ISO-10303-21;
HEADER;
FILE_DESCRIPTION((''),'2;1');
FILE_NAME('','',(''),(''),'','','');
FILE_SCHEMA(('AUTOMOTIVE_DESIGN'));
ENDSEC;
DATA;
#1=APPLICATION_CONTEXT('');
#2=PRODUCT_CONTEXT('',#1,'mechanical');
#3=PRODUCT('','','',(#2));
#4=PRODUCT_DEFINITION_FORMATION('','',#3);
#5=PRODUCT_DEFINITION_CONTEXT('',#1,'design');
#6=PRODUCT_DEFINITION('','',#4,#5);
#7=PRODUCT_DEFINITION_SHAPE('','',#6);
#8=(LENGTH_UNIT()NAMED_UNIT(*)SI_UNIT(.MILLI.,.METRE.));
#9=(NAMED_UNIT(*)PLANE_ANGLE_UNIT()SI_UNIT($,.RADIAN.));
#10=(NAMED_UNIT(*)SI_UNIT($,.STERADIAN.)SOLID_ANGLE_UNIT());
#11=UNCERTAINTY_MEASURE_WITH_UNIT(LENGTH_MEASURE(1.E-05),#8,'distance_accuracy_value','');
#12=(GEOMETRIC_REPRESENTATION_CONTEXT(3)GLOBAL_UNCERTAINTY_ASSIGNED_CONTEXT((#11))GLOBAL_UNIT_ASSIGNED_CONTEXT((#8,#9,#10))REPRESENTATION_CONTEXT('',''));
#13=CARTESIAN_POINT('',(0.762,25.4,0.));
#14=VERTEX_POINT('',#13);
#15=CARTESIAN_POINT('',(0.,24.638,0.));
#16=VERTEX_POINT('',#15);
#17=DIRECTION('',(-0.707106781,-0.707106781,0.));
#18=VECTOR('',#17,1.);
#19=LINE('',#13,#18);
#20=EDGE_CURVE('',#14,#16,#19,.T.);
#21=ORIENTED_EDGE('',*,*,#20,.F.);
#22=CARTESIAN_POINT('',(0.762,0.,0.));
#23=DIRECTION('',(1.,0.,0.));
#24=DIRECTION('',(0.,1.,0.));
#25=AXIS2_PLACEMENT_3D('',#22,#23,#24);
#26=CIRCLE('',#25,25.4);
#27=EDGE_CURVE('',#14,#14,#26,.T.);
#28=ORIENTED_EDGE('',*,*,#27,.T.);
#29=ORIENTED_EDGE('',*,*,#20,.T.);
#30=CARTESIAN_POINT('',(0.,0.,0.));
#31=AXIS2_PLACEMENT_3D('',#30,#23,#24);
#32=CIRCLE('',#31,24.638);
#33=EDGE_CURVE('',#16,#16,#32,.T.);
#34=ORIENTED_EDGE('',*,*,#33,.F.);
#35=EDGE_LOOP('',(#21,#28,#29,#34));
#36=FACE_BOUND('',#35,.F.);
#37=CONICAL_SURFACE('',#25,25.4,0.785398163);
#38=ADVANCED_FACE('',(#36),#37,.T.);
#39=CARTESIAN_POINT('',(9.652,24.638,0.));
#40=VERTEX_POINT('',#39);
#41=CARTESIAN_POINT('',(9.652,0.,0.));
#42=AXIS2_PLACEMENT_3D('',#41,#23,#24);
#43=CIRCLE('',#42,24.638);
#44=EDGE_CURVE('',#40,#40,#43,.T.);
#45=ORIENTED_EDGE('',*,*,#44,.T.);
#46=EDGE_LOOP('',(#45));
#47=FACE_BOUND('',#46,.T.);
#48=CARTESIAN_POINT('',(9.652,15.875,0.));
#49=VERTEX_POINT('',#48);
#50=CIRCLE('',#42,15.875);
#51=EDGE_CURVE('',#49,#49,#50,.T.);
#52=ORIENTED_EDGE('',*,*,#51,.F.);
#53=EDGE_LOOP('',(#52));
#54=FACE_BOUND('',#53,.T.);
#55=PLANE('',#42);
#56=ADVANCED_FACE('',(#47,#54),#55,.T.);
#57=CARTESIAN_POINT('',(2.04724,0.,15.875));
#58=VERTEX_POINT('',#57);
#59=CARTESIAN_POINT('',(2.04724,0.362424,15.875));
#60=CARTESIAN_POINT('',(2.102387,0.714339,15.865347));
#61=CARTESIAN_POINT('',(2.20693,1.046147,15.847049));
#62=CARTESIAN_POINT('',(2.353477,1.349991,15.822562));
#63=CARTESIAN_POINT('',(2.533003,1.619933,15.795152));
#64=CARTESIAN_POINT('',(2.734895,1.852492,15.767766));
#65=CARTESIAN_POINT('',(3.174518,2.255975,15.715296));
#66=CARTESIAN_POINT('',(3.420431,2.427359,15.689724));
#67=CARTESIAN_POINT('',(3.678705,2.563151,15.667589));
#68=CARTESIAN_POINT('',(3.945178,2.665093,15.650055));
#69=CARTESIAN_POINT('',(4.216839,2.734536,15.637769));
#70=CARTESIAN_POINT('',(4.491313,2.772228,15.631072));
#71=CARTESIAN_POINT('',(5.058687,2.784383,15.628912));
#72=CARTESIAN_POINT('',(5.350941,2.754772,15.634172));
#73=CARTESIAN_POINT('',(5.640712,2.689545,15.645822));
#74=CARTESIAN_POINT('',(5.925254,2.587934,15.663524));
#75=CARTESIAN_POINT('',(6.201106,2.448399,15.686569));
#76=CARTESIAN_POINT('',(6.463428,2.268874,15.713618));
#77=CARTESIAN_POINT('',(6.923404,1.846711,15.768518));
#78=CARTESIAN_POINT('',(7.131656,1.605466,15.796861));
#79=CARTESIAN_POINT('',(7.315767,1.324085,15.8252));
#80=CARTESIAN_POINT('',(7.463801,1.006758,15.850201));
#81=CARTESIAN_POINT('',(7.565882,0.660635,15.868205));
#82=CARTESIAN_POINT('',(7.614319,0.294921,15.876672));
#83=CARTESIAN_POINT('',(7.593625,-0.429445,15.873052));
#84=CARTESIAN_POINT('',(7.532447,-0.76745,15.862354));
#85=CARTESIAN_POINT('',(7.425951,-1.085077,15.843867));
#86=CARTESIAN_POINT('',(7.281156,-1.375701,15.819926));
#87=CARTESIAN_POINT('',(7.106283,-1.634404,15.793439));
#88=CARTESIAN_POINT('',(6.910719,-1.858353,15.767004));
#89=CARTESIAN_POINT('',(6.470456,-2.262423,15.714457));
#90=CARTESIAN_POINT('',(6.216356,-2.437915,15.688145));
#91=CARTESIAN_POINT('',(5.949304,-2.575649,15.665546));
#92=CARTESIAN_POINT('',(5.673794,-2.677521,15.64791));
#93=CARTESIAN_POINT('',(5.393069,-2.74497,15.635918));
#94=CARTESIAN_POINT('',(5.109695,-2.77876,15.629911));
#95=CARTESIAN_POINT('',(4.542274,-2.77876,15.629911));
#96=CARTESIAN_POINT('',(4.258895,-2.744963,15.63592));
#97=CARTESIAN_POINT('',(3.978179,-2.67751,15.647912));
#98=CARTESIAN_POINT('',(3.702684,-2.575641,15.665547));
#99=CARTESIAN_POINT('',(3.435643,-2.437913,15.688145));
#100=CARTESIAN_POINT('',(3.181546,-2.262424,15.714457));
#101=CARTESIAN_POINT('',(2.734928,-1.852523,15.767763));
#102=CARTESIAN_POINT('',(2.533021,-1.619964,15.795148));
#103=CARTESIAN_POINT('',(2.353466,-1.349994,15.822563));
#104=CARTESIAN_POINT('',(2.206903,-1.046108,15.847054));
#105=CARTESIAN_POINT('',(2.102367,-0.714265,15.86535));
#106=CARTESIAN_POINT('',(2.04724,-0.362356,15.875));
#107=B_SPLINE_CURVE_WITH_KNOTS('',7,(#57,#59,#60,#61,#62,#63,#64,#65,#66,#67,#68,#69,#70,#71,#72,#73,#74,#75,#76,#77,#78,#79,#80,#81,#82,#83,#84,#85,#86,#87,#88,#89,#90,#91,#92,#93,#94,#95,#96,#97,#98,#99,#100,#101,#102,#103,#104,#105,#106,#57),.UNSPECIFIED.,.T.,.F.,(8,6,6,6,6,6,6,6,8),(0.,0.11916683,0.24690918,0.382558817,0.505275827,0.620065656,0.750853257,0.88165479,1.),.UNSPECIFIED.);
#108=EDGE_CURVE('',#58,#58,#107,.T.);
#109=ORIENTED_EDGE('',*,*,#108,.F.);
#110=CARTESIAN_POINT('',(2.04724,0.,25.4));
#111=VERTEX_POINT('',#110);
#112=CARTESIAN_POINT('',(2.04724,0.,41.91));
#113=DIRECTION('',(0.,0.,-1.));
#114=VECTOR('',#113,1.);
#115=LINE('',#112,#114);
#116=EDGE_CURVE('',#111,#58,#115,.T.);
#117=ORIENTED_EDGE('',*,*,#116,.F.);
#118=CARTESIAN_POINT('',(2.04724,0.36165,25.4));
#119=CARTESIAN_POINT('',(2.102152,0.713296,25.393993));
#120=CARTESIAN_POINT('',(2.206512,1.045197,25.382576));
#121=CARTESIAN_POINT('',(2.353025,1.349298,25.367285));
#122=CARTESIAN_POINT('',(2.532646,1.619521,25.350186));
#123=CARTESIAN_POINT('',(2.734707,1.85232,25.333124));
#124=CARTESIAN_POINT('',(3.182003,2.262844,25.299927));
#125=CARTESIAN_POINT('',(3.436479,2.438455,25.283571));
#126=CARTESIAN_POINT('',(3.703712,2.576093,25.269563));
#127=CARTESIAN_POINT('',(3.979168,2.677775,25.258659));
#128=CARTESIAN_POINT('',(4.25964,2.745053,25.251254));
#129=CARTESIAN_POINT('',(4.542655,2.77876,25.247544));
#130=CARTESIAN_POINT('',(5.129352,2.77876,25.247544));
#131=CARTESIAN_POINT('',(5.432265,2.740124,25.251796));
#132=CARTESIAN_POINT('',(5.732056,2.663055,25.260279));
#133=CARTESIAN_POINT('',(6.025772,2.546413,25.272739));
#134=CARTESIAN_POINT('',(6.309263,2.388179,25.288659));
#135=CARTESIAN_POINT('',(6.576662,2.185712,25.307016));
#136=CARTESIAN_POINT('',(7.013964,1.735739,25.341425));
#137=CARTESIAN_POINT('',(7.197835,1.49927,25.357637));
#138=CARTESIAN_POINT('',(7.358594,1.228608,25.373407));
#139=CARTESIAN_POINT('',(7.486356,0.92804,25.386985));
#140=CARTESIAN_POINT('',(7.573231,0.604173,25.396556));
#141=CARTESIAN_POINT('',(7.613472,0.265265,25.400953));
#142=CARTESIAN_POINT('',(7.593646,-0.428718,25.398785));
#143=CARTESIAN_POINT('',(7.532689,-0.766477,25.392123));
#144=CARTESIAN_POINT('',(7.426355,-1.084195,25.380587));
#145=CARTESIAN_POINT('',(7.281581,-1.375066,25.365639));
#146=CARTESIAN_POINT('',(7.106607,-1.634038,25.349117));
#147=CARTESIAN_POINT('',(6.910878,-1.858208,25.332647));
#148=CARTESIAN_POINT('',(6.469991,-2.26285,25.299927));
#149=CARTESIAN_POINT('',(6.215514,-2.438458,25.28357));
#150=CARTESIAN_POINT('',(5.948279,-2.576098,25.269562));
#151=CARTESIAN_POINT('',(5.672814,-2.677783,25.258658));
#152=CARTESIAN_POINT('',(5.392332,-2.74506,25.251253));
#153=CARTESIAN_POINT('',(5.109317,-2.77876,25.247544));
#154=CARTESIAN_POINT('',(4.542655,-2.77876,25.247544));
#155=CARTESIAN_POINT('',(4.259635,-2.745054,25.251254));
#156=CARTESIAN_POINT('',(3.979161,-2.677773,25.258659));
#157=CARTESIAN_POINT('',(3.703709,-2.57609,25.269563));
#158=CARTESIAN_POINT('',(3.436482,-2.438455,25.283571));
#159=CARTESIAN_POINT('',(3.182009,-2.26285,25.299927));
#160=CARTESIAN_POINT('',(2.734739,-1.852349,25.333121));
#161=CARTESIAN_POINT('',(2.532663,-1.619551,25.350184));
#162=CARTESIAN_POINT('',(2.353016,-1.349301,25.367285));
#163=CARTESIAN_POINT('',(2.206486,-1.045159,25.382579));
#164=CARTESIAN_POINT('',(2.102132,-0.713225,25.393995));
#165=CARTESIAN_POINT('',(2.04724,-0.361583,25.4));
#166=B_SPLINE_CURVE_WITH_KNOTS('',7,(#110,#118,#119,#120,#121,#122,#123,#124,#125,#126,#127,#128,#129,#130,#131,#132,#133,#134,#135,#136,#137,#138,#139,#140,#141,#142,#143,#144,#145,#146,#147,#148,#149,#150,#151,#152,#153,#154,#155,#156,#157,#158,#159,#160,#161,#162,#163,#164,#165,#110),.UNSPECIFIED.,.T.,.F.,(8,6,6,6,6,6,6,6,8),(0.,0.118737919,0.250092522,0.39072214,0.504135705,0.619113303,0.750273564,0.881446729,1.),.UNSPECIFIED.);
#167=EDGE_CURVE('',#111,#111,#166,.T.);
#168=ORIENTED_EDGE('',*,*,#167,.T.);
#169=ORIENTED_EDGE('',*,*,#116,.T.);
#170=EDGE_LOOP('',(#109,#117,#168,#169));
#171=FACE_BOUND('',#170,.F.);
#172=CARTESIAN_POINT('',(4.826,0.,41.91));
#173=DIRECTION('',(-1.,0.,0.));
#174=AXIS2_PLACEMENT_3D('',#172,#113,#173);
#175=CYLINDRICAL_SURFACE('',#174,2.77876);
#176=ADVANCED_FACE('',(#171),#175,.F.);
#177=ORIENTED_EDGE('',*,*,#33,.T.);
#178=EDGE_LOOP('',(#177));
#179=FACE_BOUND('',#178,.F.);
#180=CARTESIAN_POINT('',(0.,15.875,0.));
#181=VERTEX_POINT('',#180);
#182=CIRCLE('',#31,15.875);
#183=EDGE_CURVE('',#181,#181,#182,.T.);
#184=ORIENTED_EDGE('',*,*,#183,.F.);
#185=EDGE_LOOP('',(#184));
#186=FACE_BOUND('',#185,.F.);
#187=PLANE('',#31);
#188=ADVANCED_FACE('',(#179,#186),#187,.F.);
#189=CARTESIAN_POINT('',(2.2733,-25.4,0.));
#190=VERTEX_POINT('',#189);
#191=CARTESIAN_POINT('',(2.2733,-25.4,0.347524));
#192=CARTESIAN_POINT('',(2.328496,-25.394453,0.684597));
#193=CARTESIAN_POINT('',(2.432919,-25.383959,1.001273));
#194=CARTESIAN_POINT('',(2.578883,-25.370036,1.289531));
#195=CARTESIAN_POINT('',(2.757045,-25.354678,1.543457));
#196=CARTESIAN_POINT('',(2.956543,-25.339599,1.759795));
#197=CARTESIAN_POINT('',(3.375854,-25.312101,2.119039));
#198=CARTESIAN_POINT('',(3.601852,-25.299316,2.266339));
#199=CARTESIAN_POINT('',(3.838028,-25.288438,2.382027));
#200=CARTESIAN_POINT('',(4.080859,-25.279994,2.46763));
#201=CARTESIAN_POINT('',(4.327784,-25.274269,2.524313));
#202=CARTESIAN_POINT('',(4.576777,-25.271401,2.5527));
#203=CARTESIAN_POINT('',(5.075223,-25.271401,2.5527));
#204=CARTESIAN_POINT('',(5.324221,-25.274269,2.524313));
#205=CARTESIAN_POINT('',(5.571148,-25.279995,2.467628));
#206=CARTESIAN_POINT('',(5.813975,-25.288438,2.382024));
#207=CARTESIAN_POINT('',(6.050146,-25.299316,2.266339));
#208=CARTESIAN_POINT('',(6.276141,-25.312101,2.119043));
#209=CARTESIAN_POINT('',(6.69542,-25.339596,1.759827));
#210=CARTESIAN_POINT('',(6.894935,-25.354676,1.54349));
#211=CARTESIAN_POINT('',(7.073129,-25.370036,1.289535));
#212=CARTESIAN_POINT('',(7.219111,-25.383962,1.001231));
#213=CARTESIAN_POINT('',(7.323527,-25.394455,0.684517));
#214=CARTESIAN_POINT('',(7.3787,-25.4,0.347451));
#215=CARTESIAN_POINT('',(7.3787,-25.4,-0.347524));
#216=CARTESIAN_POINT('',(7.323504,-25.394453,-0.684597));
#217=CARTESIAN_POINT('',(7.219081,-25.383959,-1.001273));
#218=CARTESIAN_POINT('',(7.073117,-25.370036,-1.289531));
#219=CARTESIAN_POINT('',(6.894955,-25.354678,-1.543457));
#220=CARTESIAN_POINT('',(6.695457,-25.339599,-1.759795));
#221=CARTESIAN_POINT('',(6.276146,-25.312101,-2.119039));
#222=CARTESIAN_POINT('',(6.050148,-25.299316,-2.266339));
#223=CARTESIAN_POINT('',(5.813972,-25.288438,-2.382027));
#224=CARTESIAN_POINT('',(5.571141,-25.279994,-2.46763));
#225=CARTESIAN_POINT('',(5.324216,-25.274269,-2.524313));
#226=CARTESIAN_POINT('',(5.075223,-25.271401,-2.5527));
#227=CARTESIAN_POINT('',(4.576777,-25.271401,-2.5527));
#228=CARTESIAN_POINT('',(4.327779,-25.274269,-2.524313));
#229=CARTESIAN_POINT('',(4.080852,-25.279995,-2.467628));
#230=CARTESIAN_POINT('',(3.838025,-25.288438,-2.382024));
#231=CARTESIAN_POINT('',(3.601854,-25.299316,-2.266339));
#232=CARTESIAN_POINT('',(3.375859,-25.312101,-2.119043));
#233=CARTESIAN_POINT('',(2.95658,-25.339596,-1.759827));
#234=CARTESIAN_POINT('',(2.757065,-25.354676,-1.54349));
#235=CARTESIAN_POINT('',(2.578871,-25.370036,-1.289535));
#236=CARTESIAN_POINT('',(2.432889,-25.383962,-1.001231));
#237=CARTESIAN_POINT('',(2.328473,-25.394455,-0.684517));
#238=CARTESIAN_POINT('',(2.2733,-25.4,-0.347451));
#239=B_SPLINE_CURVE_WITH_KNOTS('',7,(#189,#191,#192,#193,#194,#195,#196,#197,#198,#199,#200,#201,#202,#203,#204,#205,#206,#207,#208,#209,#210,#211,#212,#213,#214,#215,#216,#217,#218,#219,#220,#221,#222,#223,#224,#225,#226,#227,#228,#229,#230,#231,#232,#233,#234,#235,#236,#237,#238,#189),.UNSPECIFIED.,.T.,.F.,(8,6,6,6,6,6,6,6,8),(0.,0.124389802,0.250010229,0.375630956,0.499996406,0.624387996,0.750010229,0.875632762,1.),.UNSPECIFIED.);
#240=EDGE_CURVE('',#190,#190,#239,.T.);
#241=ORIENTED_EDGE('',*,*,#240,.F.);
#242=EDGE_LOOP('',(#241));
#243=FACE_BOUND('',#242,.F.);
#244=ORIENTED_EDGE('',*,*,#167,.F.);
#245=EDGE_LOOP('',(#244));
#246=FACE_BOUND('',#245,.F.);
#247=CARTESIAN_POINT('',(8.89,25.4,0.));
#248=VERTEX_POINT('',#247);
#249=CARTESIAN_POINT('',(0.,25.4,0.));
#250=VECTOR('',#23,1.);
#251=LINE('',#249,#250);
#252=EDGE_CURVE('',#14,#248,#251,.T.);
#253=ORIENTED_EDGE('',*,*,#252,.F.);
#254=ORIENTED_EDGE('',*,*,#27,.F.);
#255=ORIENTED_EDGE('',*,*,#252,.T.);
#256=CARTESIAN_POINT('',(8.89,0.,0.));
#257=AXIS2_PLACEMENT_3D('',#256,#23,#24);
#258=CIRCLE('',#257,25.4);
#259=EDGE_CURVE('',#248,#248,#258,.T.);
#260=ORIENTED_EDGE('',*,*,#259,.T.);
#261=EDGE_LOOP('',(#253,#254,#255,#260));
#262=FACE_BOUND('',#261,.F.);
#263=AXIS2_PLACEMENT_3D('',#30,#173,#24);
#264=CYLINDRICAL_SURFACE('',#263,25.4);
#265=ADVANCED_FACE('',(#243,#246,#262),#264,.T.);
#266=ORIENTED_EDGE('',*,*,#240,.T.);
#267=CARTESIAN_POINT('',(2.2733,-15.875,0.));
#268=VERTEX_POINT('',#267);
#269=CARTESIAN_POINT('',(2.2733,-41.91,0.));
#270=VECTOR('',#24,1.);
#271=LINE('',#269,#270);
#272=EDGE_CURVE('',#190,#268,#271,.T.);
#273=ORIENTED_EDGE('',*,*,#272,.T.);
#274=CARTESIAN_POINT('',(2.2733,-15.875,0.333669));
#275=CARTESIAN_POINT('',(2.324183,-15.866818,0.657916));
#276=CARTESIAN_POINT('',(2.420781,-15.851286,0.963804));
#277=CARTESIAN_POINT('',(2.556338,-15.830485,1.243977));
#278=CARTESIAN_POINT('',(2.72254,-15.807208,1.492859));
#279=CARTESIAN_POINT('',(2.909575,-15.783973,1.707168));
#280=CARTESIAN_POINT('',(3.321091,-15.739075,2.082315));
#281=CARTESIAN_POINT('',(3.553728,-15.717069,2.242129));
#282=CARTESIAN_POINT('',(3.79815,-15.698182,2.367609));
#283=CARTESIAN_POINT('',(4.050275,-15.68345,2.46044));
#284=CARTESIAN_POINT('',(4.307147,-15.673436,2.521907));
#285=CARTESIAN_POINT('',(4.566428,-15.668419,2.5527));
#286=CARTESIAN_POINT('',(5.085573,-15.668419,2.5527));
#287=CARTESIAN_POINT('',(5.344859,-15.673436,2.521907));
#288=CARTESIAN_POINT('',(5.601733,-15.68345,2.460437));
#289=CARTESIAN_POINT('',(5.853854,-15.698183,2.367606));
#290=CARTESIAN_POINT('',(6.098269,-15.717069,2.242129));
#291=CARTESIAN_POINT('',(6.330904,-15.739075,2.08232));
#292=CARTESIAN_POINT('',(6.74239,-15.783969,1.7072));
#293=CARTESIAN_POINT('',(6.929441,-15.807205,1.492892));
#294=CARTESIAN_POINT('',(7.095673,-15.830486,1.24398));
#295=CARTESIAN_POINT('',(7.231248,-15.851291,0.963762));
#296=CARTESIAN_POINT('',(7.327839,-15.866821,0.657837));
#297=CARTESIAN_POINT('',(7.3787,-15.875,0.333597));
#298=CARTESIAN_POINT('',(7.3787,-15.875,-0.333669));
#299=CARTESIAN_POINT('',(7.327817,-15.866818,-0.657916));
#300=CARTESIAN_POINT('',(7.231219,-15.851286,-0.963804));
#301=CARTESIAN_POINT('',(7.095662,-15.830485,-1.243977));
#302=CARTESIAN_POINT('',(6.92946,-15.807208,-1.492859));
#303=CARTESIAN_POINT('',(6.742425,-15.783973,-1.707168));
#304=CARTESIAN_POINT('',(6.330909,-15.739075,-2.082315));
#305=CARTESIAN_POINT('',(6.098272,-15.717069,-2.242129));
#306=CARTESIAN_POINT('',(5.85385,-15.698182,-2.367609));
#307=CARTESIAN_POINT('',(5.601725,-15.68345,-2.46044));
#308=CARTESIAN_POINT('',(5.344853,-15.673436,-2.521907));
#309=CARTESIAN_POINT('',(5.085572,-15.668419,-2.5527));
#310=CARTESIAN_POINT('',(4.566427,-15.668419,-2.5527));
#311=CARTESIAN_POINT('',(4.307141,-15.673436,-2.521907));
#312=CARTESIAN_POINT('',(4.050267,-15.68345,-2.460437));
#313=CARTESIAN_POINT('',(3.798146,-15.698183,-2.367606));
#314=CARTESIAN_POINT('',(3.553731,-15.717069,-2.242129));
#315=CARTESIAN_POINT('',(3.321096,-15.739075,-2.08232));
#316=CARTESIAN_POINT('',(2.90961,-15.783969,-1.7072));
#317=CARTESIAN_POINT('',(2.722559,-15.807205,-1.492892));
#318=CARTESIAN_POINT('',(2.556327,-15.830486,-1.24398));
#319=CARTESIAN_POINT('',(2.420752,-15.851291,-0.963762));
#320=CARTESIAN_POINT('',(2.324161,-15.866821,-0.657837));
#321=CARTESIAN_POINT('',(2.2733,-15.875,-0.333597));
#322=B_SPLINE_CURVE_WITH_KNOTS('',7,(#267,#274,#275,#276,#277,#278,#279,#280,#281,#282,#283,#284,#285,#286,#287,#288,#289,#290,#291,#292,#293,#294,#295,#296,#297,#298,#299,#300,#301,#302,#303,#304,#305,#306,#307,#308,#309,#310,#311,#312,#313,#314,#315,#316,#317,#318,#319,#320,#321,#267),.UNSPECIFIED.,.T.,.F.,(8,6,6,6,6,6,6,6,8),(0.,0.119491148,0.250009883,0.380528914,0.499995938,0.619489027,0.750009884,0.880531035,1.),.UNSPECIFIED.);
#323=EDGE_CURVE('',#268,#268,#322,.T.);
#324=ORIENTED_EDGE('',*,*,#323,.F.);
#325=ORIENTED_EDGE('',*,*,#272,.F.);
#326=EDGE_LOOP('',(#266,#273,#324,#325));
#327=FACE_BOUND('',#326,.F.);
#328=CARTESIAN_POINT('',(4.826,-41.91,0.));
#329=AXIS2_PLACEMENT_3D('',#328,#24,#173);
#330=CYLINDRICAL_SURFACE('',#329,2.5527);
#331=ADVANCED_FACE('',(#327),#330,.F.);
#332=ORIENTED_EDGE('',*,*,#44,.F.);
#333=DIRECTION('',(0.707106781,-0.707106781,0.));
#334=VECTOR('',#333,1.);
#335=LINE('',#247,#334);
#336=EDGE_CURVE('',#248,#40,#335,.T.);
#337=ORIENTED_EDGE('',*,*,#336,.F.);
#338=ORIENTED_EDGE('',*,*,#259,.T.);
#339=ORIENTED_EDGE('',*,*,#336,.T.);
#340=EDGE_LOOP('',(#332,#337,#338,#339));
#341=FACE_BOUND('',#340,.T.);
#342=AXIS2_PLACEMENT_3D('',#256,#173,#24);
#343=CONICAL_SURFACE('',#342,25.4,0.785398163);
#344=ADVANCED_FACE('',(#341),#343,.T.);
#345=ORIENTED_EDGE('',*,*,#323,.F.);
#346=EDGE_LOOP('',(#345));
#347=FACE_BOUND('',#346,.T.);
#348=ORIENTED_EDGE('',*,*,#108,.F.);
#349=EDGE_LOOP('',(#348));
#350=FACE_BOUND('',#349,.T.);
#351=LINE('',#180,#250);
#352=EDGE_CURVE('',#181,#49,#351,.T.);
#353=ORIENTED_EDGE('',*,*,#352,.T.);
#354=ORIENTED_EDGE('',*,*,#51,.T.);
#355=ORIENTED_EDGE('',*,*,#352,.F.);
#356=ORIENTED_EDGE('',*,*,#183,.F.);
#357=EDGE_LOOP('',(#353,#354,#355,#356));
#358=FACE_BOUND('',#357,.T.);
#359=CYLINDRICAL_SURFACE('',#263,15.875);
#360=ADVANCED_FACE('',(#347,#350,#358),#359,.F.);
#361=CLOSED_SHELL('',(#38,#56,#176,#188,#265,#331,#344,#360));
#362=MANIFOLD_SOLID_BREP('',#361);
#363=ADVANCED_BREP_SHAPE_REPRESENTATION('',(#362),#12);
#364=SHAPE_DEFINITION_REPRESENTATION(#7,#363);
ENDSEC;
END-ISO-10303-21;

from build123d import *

# Parameters (mm, degrees)
F0_R     = 25.4
F0_R_2   = 15.875
F1_DEPTH = 9.652
F2_SIZE  = 0.762
F7_SIZE  = 0.762
F8_D     = 5.55752
F8_DEPTH = 16.51
F8_TIP   = 1.6696474537
F9_D     = 5.1054
F9_DEPTH = 16.51
F9_TIP   = 1.5338169022


with BuildPart() as f1:
    # F0 (on Right) → F1 (new body)
    with BuildSketch(Plane.YZ):
        Circle(F0_R)
        Circle(F0_R_2, mode=Mode.SUBTRACT)
    extrude(amount=F1_DEPTH)

    # F2
    f2_edges = [f1.edges().sort_by_distance(p)[0] for p in [
        (9.652, -25.4, 0),
    ]]
    chamfer(f2_edges, length=F2_SIZE)

    # F7
    f7_edges = [f1.edges().sort_by_distance(p)[0] for p in [
        (0, -25.4, 0),
    ]]
    chamfer(f7_edges, length=F7_SIZE)

    # F8
    with Locations(Plane.XY.offset(25.4)):
        with Locations((4.826, 0)):
            Hole(F8_D / 2, depth=F8_DEPTH)
            with Locations((0, 0, -(F8_DEPTH + F8_TIP / 2))):  # 118° drill point
                Cone(0, F8_D / 2, F8_TIP, mode=Mode.SUBTRACT)

    # F9
    with Locations(Plane.XZ.offset(25.4)):
        with Locations((4.826, 0)):
            Hole(F9_D / 2, depth=F9_DEPTH)
            with Locations((0, 0, -(F9_DEPTH + F9_TIP / 2))):  # 118° drill point
                Cone(0, F9_D / 2, F9_TIP, mode=Mode.SUBTRACT)


solid = f1.part
